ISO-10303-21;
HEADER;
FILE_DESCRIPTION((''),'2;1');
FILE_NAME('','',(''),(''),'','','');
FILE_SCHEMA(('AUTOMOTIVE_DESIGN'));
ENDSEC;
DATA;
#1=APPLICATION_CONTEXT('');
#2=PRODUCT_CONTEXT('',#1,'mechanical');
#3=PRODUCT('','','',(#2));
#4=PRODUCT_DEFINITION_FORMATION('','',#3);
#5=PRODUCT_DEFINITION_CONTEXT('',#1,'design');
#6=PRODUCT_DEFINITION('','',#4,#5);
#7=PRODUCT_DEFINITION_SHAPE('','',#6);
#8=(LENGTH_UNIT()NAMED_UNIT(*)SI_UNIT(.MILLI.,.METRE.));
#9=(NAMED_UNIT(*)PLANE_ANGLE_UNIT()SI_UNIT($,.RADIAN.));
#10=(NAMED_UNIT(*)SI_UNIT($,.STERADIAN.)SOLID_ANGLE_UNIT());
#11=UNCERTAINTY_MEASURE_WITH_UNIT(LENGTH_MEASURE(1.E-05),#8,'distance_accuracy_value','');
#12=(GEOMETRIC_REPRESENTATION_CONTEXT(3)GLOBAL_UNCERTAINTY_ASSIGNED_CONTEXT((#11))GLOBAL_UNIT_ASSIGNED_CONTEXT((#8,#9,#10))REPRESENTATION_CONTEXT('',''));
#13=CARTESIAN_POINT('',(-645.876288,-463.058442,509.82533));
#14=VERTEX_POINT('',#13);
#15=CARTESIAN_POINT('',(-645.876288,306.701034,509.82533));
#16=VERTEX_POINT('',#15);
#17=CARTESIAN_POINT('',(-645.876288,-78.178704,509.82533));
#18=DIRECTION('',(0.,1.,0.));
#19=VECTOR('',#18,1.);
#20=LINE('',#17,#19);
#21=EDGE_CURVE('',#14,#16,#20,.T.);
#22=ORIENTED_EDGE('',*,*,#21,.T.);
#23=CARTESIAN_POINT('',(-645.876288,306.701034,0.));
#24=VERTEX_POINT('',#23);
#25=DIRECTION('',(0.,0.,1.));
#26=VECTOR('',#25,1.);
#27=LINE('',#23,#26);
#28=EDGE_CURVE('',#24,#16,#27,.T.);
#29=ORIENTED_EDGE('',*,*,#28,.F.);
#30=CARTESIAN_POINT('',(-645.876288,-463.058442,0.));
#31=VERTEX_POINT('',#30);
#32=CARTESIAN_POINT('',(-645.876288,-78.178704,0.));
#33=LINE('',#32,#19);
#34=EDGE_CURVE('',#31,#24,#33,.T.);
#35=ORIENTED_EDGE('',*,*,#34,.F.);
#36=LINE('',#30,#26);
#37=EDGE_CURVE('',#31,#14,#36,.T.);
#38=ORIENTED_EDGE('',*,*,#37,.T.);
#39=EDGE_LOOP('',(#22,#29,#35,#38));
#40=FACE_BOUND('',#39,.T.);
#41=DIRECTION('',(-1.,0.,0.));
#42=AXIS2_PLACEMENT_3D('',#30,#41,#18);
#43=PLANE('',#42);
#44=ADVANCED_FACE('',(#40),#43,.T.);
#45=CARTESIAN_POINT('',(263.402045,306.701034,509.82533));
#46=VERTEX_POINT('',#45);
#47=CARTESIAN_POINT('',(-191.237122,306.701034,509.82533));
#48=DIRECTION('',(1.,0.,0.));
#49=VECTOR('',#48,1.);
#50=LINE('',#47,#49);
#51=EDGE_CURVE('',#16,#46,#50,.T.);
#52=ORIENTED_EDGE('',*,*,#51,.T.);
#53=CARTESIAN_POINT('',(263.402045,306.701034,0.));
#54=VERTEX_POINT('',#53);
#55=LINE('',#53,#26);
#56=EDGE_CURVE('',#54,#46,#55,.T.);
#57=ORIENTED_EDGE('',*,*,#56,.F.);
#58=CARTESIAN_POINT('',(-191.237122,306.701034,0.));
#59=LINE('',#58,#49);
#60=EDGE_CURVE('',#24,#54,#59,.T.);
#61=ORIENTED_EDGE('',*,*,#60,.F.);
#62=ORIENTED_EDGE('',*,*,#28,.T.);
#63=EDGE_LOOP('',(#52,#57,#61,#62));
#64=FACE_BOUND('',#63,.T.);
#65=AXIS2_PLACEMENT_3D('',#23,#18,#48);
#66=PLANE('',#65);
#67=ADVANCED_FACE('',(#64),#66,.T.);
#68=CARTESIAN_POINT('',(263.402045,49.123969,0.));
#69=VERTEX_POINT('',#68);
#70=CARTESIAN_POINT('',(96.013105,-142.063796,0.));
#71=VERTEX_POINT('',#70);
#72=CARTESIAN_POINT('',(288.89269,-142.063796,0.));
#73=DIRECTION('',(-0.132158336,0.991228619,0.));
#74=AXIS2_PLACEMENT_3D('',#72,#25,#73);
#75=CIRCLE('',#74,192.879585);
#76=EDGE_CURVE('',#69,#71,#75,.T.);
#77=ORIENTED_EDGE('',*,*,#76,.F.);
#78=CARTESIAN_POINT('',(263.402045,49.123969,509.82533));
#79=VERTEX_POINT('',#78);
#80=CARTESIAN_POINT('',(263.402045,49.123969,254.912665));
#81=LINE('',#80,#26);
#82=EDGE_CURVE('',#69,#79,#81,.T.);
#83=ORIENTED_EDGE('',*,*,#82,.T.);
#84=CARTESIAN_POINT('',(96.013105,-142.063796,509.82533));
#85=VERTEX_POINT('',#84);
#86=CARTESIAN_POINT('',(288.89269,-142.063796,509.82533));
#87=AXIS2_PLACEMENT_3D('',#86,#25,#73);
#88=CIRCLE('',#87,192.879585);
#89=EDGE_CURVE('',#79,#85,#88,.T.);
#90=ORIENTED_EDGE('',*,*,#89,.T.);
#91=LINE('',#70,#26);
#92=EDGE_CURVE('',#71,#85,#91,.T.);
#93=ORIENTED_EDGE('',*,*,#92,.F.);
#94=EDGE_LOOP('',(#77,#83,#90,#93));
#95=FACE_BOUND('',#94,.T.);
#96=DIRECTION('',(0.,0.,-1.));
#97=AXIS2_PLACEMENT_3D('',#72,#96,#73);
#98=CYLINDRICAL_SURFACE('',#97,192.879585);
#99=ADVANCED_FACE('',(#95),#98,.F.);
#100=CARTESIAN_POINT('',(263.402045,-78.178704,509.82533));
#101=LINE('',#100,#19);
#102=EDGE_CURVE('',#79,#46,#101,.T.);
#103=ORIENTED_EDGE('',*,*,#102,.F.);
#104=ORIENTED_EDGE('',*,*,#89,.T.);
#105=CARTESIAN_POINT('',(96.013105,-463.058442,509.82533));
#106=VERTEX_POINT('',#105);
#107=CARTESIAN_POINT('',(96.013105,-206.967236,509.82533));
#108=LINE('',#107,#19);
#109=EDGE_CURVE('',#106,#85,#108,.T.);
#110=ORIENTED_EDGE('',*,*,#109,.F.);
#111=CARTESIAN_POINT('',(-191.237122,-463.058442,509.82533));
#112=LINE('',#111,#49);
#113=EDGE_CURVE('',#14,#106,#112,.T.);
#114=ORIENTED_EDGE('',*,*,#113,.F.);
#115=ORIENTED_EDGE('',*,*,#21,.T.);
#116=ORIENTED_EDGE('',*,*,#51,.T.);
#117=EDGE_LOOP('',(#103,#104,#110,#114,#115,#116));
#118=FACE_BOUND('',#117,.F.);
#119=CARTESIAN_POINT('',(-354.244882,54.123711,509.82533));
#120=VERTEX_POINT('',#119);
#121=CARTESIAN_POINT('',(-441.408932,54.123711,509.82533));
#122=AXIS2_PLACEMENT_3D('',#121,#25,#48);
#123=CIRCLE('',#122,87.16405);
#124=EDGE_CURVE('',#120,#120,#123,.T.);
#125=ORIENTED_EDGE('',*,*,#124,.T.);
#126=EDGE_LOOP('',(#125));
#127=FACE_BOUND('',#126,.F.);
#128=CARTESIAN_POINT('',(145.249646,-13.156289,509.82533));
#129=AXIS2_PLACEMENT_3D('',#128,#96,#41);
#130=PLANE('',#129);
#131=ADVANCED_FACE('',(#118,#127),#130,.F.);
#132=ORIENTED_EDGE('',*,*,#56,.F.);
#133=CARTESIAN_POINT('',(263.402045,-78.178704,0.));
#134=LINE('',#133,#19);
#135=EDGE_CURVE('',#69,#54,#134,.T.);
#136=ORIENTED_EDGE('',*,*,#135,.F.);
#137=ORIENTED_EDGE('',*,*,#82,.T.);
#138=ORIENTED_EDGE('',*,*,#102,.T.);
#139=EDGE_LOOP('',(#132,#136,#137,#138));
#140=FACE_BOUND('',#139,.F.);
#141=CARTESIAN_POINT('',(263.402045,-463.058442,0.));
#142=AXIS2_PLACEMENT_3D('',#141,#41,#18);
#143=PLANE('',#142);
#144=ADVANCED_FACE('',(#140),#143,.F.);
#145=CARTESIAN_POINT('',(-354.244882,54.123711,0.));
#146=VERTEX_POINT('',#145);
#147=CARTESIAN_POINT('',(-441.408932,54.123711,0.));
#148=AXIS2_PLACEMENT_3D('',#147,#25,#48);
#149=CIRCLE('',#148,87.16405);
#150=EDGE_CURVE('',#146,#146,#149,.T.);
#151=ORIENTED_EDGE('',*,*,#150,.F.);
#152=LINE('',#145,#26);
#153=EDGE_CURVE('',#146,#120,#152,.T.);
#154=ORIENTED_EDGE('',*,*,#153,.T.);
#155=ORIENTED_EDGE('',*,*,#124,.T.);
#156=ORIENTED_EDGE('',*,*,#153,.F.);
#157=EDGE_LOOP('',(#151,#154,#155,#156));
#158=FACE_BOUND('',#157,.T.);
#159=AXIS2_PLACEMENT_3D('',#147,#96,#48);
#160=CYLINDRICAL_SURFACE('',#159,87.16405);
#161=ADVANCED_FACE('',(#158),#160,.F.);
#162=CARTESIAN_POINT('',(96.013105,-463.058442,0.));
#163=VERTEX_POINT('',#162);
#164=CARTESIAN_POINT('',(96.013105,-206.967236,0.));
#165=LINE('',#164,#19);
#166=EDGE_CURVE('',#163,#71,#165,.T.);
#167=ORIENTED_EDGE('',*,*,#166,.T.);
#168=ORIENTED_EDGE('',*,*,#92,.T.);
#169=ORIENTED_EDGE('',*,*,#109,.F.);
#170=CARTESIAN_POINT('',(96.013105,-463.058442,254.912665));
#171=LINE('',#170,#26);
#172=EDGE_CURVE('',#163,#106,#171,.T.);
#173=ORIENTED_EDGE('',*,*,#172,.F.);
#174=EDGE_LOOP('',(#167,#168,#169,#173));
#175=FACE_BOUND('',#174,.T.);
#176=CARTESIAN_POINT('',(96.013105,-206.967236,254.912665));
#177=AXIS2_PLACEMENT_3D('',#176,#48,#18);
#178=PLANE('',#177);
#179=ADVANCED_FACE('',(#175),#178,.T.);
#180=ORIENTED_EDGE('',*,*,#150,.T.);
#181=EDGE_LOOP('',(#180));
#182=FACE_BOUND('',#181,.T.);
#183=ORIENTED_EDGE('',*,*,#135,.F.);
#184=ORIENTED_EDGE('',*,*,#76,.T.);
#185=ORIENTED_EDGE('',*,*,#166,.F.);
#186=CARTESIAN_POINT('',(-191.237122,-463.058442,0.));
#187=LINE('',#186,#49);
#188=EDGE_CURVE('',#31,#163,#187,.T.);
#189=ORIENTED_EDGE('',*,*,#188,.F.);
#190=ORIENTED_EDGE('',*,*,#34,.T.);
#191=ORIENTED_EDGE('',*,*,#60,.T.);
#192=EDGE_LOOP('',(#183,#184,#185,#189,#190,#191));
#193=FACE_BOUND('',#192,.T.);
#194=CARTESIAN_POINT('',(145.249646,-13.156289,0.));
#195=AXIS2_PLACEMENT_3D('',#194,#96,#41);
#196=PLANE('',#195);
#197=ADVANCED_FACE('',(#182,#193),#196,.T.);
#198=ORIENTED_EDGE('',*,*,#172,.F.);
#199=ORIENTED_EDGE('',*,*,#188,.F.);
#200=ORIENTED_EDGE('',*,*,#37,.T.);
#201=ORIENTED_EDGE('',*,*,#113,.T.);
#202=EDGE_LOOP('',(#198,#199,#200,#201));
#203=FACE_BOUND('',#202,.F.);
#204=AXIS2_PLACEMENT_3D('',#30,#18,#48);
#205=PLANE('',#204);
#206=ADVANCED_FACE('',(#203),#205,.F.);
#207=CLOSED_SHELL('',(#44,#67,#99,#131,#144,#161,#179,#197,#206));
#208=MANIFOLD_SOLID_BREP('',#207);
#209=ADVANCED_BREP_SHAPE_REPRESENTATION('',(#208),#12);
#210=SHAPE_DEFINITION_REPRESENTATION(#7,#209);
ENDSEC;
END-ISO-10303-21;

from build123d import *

# Parameters (mm, degrees)
F0_W        = 909.2783331871
F0_H        = 769.7594761848
F0_R        = 87.1640503321
F1_DEPTH    = 509.82533
F2_W        = 512.1824108064
F2_H        = 509.82533
F3_DEPTH    = 167.38894
F4_T1_DEPTH = 509.82533


# Not quite as in the source:
# - a fillet or chamfer that OpenCascade refuses, or shapes differently, is made with other operations: its cross-section is extruded or revolved along the edge and cut away or added


with BuildPart() as f1:
    # F0 (on Top) → F1 (new body)
    with BuildSketch(Plane.XY):
        with Locations((-191.2371218204, -78.1787037849)):
            Rectangle(F0_W, F0_H)
        with Locations((-441.408932209, 54.1237108409)):
            Circle(F0_R, mode=Mode.SUBTRACT)
    extrude(amount=F1_DEPTH)

    # F2 (on face) → F3 (cut)
    with BuildSketch(Plane.YZ.offset(263.4020447731)):
        with Locations((-206.9672364742, 254.912665)):
            Rectangle(F2_W, F2_H)
    extrude(amount=-F3_DEPTH, mode=Mode.SUBTRACT)

    # F4: fillet of radius 192.8795849713 on 1 edges, made by hand

    # F4_s2 → F4_t1 (join)
    with BuildSketch(Plane.XY):
        with BuildLine():
            ThreePointArc((263.4020447731, 49.1239689291), (143.7734985232, -15.0088679899), (96.0131047731, -142.0637956315))
            Line((96.0131047731, -142.0637956315), (96.0131047731, 49.1239689291))
            Line((96.0131047731, 49.1239689291), (263.4020447731, 49.1239689291))
        make_face()
    extrude(amount=F4_T1_DEPTH)


solid = f1.part
